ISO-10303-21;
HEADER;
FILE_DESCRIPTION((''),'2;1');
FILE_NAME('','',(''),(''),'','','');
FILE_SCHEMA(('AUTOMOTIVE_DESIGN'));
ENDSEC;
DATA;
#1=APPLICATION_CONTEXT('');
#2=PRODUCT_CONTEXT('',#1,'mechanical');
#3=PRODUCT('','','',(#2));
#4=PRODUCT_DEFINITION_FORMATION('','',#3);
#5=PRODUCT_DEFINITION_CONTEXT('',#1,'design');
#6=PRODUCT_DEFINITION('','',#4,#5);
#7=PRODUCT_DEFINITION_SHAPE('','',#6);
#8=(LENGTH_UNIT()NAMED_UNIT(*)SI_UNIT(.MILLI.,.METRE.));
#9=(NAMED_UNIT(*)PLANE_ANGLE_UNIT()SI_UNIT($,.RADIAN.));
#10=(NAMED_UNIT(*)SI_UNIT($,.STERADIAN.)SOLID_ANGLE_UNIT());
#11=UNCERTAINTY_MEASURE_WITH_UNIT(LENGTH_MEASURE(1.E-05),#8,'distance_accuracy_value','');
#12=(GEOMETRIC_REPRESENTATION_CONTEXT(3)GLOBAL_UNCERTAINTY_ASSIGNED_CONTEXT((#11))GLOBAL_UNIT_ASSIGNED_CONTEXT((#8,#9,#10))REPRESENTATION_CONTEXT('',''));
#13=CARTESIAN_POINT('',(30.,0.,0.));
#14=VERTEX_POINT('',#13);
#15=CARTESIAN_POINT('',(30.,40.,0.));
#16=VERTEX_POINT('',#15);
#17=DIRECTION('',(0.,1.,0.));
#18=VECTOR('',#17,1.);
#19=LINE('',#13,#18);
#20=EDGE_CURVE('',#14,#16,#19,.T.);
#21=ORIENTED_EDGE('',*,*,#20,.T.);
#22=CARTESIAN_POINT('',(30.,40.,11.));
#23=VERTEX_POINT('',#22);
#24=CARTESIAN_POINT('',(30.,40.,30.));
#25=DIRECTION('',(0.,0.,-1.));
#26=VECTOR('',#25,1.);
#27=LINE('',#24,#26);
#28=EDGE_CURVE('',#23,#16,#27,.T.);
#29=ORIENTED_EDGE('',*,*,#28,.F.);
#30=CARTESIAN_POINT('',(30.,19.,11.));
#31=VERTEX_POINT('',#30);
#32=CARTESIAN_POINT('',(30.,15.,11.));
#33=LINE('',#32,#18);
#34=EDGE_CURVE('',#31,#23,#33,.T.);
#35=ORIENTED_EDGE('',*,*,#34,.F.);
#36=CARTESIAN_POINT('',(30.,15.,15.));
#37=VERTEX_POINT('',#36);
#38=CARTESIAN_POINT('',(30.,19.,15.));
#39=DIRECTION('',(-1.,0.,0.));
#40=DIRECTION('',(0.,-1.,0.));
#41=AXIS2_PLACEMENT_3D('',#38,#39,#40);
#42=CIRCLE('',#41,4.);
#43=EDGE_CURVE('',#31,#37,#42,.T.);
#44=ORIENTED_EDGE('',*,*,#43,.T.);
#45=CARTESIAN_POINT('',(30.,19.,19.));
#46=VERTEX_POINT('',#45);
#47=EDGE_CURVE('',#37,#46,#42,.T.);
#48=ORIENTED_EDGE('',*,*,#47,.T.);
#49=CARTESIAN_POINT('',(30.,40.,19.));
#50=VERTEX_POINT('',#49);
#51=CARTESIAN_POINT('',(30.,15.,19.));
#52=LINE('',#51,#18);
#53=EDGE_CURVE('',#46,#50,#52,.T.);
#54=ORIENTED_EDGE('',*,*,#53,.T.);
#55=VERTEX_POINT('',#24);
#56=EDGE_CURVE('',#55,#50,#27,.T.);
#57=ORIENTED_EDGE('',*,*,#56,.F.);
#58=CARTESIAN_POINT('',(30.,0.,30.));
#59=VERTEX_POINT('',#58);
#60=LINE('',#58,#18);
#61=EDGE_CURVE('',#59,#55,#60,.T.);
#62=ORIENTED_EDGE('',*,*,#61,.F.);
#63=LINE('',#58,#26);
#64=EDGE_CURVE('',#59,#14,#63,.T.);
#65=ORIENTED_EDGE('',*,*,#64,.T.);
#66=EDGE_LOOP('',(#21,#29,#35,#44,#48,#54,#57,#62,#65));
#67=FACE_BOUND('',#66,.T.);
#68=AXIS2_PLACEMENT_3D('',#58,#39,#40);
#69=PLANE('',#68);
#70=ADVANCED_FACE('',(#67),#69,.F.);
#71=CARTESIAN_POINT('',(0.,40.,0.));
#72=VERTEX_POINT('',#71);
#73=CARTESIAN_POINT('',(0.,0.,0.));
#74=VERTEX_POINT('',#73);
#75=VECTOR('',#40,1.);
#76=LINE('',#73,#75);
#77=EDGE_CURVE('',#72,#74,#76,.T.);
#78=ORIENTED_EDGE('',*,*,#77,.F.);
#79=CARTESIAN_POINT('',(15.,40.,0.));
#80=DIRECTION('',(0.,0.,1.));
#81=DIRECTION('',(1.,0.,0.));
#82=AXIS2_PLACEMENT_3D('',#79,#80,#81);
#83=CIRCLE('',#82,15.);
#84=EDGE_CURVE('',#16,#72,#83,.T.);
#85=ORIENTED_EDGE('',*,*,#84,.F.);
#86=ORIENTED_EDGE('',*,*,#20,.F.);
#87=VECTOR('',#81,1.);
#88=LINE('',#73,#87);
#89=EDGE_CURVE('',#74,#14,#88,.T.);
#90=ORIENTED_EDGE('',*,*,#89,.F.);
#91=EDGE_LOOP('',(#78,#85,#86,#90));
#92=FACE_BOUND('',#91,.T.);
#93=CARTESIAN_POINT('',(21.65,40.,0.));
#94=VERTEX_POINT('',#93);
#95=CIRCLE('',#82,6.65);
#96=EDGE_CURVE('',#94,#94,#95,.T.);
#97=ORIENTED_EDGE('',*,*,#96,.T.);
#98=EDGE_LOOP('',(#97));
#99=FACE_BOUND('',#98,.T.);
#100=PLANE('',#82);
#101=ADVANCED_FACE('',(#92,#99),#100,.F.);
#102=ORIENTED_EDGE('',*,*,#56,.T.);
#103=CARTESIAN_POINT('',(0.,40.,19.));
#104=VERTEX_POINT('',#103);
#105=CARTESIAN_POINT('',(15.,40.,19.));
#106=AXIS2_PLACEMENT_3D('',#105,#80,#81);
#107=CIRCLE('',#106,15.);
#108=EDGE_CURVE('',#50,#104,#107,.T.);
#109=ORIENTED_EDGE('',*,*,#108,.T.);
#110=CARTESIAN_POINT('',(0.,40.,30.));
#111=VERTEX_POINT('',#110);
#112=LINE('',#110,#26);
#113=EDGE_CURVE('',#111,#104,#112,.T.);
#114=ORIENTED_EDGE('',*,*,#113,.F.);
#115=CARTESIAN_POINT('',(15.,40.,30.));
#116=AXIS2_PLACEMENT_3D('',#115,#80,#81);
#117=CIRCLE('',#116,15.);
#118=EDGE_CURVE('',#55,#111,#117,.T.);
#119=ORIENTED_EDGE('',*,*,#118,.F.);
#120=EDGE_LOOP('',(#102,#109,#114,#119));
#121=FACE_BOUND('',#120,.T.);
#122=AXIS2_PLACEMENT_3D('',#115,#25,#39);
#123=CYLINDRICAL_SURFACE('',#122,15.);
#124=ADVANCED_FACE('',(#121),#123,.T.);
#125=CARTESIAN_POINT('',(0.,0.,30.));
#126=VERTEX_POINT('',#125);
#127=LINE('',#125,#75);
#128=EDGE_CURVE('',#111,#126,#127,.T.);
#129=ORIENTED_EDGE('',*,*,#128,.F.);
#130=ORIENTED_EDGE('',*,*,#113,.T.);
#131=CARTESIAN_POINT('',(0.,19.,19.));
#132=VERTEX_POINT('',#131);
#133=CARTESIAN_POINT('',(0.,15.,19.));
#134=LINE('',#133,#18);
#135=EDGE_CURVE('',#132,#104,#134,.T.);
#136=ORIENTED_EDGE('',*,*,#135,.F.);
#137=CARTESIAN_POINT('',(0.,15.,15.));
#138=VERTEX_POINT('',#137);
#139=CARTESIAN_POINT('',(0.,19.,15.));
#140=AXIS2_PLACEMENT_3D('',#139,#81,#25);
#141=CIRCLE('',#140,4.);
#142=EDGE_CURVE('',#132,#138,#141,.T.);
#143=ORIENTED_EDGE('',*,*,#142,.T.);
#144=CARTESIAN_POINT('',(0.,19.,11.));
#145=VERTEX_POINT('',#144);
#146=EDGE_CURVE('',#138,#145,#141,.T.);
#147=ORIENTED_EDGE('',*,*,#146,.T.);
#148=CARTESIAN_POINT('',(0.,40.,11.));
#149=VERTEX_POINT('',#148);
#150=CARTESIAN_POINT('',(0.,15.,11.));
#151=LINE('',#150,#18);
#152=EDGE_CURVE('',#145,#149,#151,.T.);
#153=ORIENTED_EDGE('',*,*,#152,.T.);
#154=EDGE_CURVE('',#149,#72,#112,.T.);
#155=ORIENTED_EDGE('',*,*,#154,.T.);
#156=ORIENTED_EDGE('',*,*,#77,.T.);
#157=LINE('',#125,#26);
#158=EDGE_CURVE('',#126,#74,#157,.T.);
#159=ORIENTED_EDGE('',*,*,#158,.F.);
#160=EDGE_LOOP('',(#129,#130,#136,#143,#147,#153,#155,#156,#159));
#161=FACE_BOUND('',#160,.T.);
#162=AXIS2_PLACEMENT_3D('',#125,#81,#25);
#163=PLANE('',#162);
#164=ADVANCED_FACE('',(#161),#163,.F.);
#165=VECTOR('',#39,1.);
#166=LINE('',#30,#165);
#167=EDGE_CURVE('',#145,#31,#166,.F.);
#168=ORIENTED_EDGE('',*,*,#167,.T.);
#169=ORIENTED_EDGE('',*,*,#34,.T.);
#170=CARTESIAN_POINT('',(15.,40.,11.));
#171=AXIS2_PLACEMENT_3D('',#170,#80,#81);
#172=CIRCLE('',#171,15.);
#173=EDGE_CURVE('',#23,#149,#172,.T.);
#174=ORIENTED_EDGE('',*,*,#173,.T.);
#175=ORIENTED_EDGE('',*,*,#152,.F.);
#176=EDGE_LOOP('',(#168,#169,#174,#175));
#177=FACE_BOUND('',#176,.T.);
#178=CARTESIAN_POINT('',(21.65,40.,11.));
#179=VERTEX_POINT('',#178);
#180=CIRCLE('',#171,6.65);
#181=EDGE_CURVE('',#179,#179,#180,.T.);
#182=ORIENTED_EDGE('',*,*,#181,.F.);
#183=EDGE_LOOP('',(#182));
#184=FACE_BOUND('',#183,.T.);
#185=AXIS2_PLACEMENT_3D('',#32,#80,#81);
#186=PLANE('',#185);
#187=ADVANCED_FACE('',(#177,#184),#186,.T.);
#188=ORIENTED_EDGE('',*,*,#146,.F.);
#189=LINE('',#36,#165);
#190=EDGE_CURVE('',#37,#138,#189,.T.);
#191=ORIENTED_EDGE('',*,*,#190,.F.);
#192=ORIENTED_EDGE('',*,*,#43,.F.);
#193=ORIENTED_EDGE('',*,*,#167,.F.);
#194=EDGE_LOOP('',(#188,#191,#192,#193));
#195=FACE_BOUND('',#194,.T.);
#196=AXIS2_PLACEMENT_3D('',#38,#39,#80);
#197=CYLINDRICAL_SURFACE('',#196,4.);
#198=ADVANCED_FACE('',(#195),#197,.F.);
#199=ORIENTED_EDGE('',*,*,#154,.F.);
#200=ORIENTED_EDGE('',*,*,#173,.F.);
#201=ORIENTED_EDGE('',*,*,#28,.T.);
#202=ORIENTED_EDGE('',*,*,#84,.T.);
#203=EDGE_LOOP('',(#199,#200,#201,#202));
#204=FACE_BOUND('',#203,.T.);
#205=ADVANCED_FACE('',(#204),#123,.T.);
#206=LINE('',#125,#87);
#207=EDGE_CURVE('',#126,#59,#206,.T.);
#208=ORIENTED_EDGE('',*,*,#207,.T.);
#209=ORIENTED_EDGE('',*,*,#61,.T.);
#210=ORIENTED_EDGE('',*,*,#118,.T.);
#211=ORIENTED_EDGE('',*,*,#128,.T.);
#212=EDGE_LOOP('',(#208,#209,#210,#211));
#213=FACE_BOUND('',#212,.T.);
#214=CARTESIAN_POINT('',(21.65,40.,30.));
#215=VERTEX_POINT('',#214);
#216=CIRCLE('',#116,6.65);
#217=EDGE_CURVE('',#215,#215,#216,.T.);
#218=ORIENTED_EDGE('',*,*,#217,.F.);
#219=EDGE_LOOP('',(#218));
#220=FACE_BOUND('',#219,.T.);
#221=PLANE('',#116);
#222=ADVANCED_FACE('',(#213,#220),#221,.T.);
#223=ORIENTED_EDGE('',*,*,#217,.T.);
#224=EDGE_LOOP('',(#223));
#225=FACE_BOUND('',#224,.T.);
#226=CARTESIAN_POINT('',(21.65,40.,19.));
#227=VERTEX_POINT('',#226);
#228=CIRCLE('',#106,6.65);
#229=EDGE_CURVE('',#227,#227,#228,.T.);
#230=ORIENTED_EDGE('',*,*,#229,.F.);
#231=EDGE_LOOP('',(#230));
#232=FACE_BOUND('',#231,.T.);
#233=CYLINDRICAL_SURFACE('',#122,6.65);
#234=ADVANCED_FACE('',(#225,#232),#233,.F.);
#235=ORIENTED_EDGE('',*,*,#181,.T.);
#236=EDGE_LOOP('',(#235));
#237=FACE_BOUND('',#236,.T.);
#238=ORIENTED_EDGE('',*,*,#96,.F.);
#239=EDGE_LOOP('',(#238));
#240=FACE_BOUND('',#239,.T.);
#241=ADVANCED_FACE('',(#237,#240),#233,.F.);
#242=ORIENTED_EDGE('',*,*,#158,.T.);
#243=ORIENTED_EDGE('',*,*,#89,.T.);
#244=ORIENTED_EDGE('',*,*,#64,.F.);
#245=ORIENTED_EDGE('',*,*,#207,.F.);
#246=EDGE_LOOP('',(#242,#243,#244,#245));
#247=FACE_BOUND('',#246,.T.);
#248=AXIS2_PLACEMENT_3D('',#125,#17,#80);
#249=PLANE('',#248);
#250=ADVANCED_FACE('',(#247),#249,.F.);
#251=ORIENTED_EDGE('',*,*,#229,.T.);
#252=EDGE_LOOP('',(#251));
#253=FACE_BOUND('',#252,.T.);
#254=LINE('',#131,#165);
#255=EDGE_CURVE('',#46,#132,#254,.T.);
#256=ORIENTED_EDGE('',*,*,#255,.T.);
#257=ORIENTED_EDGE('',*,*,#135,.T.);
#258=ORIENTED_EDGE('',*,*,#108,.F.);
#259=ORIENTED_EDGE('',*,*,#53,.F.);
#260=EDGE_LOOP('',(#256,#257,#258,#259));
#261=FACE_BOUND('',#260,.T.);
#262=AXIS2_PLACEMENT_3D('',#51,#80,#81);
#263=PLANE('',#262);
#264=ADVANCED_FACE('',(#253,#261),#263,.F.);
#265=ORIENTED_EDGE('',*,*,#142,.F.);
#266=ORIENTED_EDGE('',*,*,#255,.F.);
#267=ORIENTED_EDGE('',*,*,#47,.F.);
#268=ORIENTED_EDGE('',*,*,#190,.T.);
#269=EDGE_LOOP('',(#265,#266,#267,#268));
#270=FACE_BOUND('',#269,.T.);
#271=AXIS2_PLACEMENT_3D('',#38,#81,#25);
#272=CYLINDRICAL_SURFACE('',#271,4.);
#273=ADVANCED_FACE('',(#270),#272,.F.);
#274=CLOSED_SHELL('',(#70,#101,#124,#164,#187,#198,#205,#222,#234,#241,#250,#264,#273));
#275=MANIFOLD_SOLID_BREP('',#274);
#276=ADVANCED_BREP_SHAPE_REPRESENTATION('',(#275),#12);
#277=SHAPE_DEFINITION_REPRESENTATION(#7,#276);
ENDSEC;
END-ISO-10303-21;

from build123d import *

# Parameters (mm, degrees)
SKETCH1_R           = 6.65
BOSS_EXTRUDE1_DEPTH = 30
SKETCH2_W           = 8
SKETCH2_H           = 40
CUT_EXTRUDE1_DEPTH  = 70.462219947
FILLET1_R           = 4


with BuildPart() as part:
    # Sketch1 → Boss-Extrude1 (new body)
    with BuildSketch(Plane.XY):
        with BuildLine():
            Line((0, 0), (30, 0))
            Line((30, 0), (30, 40))
            ThreePointArc((30, 40), (15, 55), (0, 40))
            Line((0, 40), (0, 0))
        make_face()
        with Locations((15, 40)):
            Circle(SKETCH1_R, mode=Mode.SUBTRACT)
    extrude(amount=BOSS_EXTRUDE1_DEPTH)

    # Sketch2 → Cut-Extrude1 (cut, through all)
    with BuildSketch(Plane.ZY):
        with Locations((15, 35)):
            Rectangle(SKETCH2_W, SKETCH2_H)
    extrude(amount=-CUT_EXTRUDE1_DEPTH, mode=Mode.SUBTRACT)

    # Fillet1
    fillet1_edges = [part.edges().sort_by_distance(p)[0] for p in [
        (15, 15, 19),
        (15, 15, 11),
    ]]
    fillet(fillet1_edges, radius=FILLET1_R - 0.0001)  # a hair under: the kernel refuses the full size


solid = part.part
